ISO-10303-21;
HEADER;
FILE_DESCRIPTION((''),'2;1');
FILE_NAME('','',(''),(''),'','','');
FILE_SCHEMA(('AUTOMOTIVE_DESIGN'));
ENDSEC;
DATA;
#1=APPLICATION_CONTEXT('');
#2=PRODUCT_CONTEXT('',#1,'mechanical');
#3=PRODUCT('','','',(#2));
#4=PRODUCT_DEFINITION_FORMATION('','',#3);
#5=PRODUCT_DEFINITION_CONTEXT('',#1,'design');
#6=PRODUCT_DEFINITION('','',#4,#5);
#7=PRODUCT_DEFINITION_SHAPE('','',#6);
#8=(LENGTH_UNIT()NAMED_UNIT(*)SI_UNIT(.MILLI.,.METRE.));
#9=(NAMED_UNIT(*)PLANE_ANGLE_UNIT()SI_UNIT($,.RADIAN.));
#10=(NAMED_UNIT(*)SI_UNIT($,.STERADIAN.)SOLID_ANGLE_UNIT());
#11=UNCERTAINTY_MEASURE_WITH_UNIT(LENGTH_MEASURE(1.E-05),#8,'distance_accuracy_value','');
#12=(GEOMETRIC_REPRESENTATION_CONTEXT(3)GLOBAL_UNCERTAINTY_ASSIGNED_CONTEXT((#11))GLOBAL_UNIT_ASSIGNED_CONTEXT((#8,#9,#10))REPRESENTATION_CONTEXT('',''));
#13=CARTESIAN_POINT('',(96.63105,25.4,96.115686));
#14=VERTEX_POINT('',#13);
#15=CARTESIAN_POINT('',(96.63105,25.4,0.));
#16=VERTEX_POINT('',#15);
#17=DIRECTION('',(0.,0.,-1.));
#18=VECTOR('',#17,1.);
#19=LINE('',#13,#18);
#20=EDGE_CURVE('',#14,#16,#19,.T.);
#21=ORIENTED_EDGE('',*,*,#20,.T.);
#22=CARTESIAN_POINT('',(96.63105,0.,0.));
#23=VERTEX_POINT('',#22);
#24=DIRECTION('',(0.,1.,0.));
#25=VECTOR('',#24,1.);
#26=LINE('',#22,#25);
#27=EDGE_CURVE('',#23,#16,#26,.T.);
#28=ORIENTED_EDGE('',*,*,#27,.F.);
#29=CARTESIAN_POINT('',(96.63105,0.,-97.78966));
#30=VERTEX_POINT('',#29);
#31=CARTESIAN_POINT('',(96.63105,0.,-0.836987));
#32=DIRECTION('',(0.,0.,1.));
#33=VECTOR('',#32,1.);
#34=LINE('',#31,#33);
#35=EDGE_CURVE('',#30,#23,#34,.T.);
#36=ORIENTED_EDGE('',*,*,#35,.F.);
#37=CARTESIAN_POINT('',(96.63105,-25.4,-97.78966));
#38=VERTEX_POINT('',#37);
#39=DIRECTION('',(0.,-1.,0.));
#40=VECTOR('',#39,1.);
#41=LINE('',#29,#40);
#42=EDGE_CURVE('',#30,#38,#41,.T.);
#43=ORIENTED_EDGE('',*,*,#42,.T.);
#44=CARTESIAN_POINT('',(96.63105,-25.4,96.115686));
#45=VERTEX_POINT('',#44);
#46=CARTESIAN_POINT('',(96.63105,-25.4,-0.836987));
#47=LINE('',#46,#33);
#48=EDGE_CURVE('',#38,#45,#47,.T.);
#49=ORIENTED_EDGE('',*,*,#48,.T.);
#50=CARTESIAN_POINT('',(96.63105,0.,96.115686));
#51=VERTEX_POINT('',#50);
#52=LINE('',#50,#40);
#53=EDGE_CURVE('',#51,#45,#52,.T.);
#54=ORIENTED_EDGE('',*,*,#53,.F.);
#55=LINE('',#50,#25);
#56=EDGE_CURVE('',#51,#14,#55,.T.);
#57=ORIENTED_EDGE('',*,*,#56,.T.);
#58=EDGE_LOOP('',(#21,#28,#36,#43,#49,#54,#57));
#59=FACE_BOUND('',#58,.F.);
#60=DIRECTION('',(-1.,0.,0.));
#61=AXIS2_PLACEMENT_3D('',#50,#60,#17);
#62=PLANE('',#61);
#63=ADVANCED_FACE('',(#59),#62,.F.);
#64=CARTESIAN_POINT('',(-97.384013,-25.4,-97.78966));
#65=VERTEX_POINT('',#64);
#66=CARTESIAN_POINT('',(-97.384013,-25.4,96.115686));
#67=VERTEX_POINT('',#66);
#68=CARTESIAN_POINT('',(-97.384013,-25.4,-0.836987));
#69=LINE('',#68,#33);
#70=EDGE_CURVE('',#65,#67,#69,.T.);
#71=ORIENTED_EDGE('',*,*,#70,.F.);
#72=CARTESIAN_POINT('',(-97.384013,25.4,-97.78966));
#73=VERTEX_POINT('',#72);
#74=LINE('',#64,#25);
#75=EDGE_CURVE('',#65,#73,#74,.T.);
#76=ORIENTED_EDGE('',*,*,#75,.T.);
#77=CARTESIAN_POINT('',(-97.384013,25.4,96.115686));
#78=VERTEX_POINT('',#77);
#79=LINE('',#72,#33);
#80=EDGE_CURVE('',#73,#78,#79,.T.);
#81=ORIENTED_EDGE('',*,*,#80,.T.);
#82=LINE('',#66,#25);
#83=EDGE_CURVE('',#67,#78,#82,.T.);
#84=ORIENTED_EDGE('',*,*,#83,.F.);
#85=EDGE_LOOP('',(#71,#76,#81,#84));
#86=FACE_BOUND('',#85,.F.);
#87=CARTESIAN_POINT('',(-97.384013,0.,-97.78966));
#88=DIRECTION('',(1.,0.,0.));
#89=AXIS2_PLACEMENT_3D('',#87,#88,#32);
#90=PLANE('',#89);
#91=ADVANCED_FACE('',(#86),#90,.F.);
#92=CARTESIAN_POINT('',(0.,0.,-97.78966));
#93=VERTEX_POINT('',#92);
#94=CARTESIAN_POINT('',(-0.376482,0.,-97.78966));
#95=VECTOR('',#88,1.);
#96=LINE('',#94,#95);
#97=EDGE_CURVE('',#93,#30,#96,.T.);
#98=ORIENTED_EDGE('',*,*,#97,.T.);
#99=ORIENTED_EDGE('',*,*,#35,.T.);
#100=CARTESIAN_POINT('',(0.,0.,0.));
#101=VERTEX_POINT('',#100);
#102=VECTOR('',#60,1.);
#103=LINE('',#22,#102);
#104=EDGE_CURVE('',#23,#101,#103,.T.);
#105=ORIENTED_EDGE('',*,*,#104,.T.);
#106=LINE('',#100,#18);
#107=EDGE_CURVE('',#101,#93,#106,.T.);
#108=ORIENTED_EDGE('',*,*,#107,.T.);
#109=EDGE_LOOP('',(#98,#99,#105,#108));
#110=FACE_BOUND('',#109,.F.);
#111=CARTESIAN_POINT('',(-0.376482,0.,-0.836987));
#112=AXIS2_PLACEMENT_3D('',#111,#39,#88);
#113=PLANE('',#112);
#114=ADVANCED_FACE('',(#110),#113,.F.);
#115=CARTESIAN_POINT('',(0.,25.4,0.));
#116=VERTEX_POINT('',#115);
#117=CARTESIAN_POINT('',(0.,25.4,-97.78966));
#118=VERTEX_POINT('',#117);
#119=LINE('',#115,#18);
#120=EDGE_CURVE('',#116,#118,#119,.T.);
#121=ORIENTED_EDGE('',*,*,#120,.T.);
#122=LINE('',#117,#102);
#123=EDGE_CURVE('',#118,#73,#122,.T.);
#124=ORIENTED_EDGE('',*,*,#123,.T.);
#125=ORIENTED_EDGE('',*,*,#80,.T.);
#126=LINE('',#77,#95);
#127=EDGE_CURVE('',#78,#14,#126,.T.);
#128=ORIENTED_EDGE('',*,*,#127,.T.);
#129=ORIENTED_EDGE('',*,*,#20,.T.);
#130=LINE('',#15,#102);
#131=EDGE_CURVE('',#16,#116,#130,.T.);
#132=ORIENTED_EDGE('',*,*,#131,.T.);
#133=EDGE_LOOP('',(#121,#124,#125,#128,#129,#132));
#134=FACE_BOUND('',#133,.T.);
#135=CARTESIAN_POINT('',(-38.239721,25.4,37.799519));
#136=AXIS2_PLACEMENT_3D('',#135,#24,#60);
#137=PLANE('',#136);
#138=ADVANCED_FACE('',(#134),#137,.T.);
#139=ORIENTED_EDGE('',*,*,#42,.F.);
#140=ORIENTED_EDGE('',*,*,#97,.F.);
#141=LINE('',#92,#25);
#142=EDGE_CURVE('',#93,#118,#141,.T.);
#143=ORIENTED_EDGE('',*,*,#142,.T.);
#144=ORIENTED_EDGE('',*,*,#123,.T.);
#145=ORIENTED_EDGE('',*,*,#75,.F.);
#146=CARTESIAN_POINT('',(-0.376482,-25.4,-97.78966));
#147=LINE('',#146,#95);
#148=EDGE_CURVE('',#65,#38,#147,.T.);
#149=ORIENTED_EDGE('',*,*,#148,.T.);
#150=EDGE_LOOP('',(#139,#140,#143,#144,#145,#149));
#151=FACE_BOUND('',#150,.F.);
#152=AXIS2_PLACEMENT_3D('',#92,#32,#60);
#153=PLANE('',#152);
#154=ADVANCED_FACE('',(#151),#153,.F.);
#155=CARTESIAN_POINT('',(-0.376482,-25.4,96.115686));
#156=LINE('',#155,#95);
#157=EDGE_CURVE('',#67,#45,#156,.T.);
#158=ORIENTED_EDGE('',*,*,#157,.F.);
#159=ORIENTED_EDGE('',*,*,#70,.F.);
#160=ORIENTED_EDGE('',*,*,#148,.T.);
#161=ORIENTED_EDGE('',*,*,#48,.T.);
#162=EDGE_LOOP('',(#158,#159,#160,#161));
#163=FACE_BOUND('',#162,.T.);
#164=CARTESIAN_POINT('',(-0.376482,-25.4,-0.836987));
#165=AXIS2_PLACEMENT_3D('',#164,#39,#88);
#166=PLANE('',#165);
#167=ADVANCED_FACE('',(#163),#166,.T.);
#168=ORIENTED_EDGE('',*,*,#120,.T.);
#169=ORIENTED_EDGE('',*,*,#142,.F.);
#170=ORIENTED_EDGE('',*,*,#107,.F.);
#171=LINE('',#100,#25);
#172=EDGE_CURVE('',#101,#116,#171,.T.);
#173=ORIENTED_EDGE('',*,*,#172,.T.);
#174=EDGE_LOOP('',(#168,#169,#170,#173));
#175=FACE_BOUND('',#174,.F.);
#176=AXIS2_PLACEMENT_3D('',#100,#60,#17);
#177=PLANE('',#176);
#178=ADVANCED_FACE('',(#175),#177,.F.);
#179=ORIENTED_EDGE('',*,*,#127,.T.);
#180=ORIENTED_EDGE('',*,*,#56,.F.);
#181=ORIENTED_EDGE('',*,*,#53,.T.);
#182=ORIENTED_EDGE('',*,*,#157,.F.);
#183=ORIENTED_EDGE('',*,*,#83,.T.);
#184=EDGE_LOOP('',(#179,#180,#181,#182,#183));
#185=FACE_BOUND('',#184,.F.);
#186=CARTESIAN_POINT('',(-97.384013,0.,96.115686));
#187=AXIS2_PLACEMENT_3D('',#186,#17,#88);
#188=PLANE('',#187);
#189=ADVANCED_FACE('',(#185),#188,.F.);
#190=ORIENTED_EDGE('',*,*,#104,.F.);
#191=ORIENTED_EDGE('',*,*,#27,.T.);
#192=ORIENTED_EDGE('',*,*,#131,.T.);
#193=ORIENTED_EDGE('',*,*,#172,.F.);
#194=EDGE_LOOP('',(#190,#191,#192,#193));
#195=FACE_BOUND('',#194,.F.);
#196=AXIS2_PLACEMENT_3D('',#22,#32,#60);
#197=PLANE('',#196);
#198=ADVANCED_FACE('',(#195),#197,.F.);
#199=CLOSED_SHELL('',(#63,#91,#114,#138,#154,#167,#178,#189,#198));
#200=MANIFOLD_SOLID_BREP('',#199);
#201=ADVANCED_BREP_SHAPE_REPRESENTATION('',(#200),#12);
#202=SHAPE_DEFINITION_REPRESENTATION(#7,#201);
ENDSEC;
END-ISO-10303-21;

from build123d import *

# Parameters (mm, degrees)
F0_W     = 194.0150633454
F0_H     = 193.9053460956
F1_DEPTH = 25.4
F2_W     = 76.4794424176
F2_H     = 75.5990371108
F2_H_2   = 76.2040093541
F2_W_2   = 74.5813548565
F3_DEPTH = 25.4


with BuildPart() as f1:
    # F0 (on Front) → F1 (new body)
    with BuildSketch(Plane.XZ):
        with Locations((-0.3764815629, -0.8369870484)):
            Rectangle(F0_W, F0_H)
    extrude(amount=F1_DEPTH)

    # F2 (on face) → F3 (join)
    with BuildSketch(Plane(origin=(0, 0, 0), x_dir=(-1, 0, 0), z_dir=(0, 1, 0))):
        with Locations((38.2397212088, 37.7995185554)):
            Rectangle(F2_W, F2_H)
        with Locations((38.2397212088, -38.1020046771)):
            Rectangle(F2_W, F2_H_2)
        with Locations((-37.2906774282, 37.7995185554)):
            Rectangle(F2_W_2, F2_H)
        Polygon((97.3840132356, 0), (76.4794424176, 0), (76.4794424176, -76.2040093541), (0, -76.2040093541), (0, -97.7896600962), (97.3840132356, -97.7896600962), align=None)
        Polygon((76.4794424176, 75.5990371108), (76.4794424176, 0), (97.3840132356, 0), (97.3840132356, 96.1156859994), (-96.6310501099, 96.1156859994), (-96.6310501099, 0), (-74.5813548565, 0), (-74.5813548565, 75.5990371108), (0, 75.5990371108), align=None)
    extrude(amount=F3_DEPTH)


solid = f1.part
